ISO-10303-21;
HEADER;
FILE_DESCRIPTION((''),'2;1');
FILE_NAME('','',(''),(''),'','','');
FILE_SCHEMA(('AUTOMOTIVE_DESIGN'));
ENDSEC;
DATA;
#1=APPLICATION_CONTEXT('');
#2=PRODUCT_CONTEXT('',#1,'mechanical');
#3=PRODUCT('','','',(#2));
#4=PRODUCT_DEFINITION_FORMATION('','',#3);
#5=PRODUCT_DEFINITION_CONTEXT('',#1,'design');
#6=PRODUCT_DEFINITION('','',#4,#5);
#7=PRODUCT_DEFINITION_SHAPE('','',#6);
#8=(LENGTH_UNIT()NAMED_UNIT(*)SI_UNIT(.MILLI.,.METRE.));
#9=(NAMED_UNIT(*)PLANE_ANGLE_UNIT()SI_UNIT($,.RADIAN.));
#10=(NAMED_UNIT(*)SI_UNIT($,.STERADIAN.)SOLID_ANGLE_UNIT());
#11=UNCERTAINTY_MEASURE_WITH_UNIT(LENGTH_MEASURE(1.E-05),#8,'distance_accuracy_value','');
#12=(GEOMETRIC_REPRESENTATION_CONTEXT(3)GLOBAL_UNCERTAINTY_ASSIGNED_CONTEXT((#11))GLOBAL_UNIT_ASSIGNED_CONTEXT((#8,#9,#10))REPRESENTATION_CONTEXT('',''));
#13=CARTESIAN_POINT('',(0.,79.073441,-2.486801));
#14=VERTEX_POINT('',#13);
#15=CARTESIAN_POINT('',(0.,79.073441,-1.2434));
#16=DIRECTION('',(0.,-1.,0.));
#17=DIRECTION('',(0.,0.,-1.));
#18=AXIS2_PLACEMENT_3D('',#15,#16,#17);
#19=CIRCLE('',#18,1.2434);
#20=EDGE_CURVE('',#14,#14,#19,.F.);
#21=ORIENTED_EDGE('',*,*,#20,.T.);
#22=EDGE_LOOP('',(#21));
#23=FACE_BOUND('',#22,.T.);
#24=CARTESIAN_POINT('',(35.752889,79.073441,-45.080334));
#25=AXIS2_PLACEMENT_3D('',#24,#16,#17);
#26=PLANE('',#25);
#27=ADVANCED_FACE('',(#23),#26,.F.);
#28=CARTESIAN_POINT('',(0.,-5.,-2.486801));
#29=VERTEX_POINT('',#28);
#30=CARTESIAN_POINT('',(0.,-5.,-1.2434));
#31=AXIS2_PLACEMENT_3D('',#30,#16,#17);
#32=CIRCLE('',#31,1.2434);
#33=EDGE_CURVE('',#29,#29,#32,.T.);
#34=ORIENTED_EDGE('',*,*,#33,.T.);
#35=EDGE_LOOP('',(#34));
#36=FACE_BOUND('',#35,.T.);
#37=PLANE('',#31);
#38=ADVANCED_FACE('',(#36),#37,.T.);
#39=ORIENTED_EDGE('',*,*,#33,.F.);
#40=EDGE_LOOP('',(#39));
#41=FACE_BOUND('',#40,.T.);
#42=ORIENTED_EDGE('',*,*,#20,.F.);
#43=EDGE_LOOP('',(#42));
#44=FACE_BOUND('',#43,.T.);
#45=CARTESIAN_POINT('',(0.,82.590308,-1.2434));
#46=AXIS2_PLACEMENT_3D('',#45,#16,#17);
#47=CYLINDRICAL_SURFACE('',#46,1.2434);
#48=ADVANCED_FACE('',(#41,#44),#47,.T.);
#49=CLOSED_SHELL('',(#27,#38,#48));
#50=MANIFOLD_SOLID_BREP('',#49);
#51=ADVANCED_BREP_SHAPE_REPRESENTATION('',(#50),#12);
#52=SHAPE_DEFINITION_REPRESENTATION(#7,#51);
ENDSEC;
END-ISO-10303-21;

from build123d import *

# Parameters (mm, degrees)
SCHIZZO1_R                   = 1.243400346
ESTRUSIONE_ESTRUSIONE1_DEPTH = 84.07344072


# Read off the part's stored shape, not the designer's step: DjiGps.stp
with BuildPart() as part:
    # Schizzo1 → Estrusione-Estrusione1 (new body)
    with BuildSketch(Plane.XZ.offset(5)):
        with Locations(Location((0, -1.243400346, 0), (0, 0, 270))):
            Circle(SCHIZZO1_R)
    extrude(amount=-ESTRUSIONE_ESTRUSIONE1_DEPTH)


solid = part.part
